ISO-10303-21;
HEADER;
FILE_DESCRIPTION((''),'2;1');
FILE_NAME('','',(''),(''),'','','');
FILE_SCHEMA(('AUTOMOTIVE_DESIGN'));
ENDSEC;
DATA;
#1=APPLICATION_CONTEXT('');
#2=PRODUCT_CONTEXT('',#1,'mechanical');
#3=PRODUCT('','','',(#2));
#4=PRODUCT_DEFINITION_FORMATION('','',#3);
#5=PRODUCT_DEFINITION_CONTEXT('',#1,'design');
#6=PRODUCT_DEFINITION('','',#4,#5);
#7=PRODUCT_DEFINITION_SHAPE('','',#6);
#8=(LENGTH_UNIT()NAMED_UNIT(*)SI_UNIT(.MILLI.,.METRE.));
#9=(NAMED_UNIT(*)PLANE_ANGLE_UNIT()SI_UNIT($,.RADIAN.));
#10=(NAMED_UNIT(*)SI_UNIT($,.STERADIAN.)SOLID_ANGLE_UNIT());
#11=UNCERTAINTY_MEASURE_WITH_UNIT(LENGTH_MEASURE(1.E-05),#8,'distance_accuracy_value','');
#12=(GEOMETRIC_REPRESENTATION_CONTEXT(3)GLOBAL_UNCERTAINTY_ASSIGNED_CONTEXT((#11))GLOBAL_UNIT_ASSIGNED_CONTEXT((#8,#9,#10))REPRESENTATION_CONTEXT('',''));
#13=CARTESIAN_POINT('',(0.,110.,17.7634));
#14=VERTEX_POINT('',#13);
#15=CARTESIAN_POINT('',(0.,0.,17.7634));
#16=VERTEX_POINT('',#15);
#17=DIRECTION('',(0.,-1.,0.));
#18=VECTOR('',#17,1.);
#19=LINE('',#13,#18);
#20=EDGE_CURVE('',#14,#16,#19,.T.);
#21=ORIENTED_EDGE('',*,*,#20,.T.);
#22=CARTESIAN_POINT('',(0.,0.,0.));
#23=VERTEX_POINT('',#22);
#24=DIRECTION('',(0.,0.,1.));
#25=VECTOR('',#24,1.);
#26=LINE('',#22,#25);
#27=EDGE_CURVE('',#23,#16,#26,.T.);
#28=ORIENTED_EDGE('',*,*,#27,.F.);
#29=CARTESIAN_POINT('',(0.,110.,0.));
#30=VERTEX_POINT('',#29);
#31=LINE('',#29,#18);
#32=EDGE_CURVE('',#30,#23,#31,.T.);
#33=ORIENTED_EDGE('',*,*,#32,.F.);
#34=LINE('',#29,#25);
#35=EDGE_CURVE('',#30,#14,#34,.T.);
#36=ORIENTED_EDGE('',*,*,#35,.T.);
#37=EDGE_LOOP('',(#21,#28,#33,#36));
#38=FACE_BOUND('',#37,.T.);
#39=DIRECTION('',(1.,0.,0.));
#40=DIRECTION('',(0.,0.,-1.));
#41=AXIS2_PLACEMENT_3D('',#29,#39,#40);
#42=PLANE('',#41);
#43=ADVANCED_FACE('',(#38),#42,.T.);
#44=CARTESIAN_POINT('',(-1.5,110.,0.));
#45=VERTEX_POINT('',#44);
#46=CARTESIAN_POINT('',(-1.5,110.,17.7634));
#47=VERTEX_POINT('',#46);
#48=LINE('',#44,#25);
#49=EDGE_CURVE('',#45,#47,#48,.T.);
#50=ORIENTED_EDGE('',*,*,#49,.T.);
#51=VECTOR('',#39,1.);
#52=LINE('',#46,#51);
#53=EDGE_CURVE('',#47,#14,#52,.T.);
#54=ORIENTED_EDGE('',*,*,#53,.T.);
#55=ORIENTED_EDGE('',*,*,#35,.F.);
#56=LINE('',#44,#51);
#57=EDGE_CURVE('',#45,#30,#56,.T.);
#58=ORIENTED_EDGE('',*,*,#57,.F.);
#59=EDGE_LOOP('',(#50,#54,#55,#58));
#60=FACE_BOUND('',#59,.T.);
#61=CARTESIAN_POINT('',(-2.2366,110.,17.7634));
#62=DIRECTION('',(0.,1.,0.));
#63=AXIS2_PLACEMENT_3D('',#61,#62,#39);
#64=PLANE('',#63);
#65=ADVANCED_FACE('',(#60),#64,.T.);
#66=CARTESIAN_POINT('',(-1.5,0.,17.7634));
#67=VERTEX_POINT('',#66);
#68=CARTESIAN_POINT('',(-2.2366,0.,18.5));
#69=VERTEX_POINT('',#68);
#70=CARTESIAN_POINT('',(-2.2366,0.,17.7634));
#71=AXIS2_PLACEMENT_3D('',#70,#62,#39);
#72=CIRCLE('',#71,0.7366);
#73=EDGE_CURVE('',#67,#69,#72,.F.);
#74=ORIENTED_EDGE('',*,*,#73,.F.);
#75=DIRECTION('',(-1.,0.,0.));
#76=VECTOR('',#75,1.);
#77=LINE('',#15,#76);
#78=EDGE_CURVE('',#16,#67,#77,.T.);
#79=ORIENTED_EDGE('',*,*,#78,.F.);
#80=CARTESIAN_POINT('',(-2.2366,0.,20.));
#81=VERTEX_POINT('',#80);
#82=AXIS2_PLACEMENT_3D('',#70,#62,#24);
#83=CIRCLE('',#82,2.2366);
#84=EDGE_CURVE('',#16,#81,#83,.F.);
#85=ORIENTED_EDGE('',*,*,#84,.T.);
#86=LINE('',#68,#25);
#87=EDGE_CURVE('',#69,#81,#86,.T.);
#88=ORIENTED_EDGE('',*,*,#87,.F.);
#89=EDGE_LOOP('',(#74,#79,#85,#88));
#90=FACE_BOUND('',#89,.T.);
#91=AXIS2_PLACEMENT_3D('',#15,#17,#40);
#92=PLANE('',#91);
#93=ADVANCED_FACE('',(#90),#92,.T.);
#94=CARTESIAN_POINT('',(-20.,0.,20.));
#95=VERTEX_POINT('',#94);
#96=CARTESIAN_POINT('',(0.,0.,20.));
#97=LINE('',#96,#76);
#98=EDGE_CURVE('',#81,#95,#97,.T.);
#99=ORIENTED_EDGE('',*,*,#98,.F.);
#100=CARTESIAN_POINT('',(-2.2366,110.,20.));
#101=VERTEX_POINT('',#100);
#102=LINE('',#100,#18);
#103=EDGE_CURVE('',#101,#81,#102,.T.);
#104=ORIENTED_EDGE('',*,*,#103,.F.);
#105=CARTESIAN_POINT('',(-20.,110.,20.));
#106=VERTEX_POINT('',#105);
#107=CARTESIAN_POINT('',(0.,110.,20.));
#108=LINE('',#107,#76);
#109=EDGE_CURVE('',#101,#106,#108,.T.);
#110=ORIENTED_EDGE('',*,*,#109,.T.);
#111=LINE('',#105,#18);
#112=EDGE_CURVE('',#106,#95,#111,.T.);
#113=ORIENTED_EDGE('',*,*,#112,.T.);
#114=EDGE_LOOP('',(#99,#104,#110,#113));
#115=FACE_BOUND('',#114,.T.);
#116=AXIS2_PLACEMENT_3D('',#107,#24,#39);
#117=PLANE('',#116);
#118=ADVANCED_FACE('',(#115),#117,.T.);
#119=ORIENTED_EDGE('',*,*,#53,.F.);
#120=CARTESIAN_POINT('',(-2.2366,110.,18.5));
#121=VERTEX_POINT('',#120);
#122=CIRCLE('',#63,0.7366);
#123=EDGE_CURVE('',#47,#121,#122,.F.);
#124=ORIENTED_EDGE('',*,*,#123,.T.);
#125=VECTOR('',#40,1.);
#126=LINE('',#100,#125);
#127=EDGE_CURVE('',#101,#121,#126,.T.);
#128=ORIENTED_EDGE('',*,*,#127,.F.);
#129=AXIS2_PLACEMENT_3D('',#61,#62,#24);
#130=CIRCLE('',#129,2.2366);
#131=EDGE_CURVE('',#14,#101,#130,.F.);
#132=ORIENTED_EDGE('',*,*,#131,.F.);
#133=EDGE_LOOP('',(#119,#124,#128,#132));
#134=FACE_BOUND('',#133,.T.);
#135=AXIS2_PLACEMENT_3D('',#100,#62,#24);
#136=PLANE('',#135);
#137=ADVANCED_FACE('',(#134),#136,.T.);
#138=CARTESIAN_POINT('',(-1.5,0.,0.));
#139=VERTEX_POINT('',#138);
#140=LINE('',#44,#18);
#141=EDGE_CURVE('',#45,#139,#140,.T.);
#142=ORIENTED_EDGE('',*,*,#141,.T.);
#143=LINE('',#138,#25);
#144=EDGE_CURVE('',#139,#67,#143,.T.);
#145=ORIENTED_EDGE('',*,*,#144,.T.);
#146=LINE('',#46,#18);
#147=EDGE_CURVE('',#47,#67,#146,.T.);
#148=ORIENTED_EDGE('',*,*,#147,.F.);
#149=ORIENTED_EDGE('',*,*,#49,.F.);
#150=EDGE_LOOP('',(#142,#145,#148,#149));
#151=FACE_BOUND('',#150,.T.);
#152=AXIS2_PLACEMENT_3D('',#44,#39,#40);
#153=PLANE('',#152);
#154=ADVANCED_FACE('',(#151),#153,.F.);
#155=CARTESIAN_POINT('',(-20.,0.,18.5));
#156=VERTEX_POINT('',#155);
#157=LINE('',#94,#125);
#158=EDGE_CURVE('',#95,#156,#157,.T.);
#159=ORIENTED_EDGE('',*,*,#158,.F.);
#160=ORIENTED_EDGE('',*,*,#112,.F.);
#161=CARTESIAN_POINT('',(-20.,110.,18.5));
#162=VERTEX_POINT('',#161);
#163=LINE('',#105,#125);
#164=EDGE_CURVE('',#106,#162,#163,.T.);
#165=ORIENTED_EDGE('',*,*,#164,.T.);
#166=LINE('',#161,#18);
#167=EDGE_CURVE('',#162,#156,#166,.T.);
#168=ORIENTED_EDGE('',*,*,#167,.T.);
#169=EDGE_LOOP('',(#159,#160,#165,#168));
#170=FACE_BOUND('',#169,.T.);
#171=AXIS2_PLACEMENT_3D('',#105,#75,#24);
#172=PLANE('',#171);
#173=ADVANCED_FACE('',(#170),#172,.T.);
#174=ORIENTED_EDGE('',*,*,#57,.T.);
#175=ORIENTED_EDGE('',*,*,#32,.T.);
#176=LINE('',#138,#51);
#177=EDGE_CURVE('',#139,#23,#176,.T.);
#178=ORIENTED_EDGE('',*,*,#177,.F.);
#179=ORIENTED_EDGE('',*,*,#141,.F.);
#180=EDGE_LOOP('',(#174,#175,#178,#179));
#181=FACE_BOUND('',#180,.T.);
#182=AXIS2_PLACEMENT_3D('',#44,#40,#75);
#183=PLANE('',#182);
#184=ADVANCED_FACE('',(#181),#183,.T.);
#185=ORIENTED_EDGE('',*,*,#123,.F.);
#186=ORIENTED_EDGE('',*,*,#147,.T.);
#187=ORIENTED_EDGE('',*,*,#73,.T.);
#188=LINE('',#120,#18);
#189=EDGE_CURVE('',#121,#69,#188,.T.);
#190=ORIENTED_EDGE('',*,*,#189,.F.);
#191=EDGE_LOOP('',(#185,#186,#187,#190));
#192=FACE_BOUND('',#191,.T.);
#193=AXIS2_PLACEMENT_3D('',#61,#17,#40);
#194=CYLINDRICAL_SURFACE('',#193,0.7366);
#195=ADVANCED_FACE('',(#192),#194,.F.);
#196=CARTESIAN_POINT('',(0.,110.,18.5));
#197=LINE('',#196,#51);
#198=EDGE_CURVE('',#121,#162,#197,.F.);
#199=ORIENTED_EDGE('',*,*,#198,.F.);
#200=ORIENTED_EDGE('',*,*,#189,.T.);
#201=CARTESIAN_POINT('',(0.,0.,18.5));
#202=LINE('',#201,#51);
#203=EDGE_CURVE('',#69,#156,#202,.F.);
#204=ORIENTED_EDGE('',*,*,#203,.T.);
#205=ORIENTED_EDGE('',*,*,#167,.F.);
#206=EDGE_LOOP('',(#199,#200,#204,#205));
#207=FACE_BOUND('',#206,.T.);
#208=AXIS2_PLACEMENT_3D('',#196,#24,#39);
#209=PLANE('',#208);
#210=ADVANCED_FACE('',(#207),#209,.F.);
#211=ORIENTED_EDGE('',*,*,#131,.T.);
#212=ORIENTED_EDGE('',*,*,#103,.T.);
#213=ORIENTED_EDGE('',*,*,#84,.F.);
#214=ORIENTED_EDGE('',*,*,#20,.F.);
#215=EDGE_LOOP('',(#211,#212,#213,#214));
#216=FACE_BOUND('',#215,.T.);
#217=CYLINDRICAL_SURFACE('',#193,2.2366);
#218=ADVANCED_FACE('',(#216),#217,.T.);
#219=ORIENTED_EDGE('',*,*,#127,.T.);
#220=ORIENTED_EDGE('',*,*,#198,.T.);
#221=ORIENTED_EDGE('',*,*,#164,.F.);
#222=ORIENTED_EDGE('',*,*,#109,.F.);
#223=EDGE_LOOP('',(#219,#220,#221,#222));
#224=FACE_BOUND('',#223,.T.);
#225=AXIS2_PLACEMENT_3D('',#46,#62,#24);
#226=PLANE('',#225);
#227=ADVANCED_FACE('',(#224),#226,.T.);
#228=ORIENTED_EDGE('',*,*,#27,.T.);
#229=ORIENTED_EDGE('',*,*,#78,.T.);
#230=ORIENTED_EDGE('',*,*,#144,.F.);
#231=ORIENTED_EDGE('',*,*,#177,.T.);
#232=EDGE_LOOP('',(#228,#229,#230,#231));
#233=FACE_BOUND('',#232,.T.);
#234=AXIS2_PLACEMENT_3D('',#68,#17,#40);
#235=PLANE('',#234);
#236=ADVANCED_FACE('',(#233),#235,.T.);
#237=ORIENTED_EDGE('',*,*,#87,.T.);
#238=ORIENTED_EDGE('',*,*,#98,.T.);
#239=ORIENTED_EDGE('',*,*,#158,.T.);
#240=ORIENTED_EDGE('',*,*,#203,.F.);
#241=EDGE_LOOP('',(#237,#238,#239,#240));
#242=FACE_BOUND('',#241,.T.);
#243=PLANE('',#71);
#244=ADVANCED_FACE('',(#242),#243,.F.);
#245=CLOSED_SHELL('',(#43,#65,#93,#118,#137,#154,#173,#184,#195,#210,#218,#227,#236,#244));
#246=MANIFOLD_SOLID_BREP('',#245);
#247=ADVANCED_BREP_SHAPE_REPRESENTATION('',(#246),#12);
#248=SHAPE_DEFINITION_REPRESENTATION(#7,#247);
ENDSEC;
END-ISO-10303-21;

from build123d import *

# Parameters (mm, degrees)
BASE_FLANGE1_DEPTH = 110


# Sheet-metal steps are written as plain solids
with BuildPart() as part:
    # Sketch1 → Base-Flange1 (new body)
    with BuildSketch(Plane(origin=(0, 0, 0), x_dir=(1, 0, 0), z_dir=(0, 1, 0))):
        with BuildLine():
            Line((0, 0), (0, -17.7634))
            ThreePointArc((0, -17.7634), (-0.655084973, -19.344915027), (-2.2366, -20))
            Line((-2.2366, -20), (-20, -20))
            Line((-20, -20), (-20, -18.5))
            Line((-20, -18.5), (-2.2366, -18.5))
            ThreePointArc((-2.2366, -18.5), (-1.715745145, -18.284254855), (-1.5, -17.7634))
            Line((-1.5, -17.7634), (-1.5, 0))
            Line((-1.5, 0), (0, 0))
        make_face()
    extrude(amount=BASE_FLANGE1_DEPTH)


solid = part.part
